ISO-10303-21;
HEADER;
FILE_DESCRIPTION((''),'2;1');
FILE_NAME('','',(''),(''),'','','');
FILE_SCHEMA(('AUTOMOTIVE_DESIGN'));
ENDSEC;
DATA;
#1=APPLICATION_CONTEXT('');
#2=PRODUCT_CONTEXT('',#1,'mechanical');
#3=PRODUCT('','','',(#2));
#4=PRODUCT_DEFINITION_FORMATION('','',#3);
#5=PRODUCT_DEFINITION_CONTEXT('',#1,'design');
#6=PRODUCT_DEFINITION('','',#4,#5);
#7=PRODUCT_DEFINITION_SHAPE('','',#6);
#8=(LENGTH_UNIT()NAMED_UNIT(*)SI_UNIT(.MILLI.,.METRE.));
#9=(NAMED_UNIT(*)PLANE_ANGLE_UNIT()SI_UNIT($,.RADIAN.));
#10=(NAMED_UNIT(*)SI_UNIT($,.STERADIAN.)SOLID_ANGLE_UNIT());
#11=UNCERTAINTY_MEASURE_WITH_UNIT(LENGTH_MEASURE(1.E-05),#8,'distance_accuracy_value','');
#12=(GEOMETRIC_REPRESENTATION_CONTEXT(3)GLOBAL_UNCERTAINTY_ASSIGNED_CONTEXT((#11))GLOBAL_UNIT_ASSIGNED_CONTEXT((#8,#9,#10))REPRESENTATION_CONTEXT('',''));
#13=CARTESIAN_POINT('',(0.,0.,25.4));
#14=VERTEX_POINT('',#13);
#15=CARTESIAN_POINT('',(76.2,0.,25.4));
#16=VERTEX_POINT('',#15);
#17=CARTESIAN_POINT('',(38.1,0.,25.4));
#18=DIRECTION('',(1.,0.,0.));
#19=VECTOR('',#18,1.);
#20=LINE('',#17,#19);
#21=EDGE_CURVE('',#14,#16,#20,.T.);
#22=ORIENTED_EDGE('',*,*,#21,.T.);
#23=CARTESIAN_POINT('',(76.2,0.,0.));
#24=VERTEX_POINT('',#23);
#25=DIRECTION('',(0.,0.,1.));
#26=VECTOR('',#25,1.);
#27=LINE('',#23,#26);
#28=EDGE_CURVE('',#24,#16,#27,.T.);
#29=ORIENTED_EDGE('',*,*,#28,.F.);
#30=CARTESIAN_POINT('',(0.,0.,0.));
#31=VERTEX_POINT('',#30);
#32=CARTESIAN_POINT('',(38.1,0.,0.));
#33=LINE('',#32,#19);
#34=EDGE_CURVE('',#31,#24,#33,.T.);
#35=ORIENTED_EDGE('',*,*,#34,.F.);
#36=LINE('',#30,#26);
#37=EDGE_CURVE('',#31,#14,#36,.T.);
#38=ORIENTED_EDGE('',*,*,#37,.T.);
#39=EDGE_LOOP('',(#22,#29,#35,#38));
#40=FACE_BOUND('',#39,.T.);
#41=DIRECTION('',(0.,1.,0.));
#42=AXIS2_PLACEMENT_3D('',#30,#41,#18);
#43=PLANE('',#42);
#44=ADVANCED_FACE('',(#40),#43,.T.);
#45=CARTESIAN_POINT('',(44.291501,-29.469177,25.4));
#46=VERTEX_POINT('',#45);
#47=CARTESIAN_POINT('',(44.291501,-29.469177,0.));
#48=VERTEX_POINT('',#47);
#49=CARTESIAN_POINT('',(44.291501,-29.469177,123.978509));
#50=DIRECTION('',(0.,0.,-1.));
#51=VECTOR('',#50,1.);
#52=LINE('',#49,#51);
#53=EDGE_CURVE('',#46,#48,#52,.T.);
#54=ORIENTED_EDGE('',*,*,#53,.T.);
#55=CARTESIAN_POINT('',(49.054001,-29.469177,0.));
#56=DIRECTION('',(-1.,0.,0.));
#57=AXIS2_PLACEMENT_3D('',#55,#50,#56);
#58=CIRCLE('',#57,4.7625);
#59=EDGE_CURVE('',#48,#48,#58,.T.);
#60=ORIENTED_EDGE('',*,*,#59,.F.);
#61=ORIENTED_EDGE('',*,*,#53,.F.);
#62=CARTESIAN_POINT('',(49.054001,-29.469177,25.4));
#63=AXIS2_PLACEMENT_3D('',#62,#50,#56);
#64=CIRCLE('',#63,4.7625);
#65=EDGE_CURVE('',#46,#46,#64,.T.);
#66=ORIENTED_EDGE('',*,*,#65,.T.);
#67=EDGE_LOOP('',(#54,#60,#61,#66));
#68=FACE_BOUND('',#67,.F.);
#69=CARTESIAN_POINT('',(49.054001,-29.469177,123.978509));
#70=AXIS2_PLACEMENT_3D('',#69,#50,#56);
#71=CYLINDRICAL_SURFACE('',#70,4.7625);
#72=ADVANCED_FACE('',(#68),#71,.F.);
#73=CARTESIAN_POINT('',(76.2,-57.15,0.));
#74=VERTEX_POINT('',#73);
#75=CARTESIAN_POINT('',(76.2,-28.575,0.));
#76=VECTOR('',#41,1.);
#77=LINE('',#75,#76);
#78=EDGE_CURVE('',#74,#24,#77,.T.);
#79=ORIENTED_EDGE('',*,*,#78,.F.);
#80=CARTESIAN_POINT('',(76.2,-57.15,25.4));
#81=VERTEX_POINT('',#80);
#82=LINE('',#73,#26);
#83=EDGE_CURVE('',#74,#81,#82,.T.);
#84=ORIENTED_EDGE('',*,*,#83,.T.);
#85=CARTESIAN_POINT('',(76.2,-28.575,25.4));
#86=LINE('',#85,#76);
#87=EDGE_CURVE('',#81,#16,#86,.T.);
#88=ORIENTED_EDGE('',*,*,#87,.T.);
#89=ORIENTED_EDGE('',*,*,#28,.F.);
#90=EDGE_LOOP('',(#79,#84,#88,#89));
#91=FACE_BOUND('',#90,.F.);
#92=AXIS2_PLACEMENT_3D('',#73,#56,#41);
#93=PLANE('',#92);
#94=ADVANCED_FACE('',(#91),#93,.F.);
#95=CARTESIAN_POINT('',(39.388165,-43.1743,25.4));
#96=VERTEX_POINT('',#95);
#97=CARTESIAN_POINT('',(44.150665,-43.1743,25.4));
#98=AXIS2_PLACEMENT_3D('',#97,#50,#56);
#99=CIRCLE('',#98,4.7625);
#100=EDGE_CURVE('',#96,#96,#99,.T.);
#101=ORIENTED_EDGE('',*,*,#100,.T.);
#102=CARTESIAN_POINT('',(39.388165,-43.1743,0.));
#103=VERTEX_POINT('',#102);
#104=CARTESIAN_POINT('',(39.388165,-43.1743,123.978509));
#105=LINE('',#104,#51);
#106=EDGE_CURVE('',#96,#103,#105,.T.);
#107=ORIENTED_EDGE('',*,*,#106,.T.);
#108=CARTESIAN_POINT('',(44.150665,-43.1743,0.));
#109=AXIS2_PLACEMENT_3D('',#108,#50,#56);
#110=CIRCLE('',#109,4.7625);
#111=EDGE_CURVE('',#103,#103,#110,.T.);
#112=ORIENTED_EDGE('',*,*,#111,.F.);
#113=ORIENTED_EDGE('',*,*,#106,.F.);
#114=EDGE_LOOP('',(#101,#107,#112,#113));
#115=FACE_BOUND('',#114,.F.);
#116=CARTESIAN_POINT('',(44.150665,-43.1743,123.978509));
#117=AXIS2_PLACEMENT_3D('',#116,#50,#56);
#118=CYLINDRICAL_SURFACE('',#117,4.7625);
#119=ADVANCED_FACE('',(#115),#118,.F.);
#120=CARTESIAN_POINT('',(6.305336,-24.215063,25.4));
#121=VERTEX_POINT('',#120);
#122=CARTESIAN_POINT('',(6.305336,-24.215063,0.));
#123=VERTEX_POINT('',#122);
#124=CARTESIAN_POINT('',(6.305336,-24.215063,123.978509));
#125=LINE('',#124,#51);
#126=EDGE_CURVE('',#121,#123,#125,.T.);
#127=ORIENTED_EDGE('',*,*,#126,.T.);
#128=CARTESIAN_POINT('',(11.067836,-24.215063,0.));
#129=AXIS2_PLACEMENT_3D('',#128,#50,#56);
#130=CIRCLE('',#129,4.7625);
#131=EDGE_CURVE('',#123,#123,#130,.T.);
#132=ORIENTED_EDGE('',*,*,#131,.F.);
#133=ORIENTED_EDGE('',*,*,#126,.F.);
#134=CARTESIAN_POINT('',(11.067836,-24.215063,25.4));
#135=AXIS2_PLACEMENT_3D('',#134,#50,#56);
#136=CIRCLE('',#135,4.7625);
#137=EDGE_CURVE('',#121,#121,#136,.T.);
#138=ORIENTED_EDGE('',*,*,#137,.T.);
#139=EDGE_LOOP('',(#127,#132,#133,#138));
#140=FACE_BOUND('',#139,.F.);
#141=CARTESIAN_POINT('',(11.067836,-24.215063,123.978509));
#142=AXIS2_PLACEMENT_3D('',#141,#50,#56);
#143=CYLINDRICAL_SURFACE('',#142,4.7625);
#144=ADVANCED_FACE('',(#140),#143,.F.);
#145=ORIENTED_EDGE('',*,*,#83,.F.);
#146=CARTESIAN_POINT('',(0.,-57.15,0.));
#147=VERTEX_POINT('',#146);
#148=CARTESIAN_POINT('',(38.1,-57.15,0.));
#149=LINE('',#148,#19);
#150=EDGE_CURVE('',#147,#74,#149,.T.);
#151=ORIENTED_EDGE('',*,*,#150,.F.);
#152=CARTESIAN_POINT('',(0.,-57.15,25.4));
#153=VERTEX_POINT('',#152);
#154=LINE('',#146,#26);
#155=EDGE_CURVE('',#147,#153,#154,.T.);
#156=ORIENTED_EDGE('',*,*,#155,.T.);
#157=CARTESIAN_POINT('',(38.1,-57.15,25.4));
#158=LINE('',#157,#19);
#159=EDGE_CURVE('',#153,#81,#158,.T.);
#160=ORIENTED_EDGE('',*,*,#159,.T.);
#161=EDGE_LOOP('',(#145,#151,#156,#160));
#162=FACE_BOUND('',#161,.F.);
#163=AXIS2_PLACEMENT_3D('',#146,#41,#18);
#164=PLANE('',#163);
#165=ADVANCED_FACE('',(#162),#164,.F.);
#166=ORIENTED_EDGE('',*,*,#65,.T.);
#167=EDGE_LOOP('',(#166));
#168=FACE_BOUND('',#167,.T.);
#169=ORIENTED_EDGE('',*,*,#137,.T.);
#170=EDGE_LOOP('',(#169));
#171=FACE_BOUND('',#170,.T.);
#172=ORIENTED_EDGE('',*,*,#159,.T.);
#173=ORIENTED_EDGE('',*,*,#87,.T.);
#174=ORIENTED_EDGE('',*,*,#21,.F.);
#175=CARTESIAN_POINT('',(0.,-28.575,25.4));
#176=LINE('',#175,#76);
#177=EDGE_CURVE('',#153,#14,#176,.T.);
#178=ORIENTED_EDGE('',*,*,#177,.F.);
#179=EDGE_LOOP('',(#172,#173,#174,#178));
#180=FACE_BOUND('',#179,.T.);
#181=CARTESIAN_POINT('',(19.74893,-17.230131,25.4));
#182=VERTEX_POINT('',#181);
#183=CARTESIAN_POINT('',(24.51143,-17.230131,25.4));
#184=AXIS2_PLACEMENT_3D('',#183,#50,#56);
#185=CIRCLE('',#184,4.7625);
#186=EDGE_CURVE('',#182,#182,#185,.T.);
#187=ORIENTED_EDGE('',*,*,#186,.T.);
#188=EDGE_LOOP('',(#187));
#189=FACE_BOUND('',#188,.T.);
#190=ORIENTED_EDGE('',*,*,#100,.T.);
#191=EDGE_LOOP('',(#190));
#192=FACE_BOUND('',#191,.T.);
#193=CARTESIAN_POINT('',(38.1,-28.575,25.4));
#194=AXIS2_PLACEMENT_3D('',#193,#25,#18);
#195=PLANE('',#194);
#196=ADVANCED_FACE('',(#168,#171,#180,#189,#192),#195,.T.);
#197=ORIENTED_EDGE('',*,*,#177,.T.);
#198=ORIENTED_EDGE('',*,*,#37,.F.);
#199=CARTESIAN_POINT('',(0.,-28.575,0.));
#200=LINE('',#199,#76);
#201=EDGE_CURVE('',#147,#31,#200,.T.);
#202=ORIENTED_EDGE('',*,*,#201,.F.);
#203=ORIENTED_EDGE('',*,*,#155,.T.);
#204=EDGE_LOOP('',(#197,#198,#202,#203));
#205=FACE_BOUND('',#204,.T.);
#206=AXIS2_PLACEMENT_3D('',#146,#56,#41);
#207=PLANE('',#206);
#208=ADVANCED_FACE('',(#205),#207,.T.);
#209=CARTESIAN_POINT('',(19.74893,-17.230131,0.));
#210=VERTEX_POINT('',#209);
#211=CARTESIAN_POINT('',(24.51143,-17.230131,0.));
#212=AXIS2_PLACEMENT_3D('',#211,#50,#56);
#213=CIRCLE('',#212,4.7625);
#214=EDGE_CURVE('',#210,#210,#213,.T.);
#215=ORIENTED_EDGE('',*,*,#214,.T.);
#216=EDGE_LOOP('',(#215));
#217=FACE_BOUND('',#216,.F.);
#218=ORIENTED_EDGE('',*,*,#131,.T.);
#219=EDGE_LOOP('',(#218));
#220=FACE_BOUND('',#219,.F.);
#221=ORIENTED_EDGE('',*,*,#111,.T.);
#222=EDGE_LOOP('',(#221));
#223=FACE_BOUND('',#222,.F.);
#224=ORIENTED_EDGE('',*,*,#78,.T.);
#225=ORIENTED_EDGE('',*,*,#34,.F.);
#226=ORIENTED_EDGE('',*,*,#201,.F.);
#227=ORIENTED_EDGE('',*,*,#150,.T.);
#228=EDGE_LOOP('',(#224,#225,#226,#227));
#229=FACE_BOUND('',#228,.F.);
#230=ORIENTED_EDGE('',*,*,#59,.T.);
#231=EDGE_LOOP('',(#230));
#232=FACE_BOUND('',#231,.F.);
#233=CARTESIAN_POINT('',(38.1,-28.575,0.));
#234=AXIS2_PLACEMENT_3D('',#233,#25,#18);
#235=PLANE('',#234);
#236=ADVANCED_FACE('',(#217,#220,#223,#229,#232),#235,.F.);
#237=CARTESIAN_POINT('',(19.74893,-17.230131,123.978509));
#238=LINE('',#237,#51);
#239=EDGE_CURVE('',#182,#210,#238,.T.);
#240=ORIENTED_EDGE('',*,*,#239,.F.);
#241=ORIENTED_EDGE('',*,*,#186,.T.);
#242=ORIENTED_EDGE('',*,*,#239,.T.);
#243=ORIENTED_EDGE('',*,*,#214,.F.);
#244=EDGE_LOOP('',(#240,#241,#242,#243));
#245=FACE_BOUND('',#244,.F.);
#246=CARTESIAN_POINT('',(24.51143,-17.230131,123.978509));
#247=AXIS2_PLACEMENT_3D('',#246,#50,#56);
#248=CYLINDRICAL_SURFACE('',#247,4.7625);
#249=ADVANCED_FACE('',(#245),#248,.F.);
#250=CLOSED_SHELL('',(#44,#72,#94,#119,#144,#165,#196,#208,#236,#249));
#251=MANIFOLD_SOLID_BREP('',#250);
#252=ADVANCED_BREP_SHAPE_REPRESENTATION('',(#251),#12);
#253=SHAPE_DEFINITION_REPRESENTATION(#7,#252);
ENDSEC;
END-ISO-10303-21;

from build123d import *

# Parameters (mm, degrees)
F0_W     = 76.2
F0_H     = 57.15
F1_DEPTH = 25.4
F3_D     = 9.525


# Not quite as in the source:
# - a length typed as a fraction of an inch, garbled in the dataset ("3 / 203.2 mm" for 3/8 in), is restored


with BuildPart() as f1:
    # F0 (on Top) → F1 (new body)
    with BuildSketch(Plane.XY):
        with Locations((38.1, -28.575)):
            Rectangle(F0_W, F0_H)
    extrude(amount=F1_DEPTH)

    # F3 (through all)
    with Locations(Plane.XY.offset(25.4)):
        with Locations((49.0540005267, -29.4691771269), (24.5114304125, -17.2301307321), (11.0678356141, -24.2150630802), (44.1506654024, -43.1743003428)):
            Hole(F3_D / 2)


solid = f1.part
